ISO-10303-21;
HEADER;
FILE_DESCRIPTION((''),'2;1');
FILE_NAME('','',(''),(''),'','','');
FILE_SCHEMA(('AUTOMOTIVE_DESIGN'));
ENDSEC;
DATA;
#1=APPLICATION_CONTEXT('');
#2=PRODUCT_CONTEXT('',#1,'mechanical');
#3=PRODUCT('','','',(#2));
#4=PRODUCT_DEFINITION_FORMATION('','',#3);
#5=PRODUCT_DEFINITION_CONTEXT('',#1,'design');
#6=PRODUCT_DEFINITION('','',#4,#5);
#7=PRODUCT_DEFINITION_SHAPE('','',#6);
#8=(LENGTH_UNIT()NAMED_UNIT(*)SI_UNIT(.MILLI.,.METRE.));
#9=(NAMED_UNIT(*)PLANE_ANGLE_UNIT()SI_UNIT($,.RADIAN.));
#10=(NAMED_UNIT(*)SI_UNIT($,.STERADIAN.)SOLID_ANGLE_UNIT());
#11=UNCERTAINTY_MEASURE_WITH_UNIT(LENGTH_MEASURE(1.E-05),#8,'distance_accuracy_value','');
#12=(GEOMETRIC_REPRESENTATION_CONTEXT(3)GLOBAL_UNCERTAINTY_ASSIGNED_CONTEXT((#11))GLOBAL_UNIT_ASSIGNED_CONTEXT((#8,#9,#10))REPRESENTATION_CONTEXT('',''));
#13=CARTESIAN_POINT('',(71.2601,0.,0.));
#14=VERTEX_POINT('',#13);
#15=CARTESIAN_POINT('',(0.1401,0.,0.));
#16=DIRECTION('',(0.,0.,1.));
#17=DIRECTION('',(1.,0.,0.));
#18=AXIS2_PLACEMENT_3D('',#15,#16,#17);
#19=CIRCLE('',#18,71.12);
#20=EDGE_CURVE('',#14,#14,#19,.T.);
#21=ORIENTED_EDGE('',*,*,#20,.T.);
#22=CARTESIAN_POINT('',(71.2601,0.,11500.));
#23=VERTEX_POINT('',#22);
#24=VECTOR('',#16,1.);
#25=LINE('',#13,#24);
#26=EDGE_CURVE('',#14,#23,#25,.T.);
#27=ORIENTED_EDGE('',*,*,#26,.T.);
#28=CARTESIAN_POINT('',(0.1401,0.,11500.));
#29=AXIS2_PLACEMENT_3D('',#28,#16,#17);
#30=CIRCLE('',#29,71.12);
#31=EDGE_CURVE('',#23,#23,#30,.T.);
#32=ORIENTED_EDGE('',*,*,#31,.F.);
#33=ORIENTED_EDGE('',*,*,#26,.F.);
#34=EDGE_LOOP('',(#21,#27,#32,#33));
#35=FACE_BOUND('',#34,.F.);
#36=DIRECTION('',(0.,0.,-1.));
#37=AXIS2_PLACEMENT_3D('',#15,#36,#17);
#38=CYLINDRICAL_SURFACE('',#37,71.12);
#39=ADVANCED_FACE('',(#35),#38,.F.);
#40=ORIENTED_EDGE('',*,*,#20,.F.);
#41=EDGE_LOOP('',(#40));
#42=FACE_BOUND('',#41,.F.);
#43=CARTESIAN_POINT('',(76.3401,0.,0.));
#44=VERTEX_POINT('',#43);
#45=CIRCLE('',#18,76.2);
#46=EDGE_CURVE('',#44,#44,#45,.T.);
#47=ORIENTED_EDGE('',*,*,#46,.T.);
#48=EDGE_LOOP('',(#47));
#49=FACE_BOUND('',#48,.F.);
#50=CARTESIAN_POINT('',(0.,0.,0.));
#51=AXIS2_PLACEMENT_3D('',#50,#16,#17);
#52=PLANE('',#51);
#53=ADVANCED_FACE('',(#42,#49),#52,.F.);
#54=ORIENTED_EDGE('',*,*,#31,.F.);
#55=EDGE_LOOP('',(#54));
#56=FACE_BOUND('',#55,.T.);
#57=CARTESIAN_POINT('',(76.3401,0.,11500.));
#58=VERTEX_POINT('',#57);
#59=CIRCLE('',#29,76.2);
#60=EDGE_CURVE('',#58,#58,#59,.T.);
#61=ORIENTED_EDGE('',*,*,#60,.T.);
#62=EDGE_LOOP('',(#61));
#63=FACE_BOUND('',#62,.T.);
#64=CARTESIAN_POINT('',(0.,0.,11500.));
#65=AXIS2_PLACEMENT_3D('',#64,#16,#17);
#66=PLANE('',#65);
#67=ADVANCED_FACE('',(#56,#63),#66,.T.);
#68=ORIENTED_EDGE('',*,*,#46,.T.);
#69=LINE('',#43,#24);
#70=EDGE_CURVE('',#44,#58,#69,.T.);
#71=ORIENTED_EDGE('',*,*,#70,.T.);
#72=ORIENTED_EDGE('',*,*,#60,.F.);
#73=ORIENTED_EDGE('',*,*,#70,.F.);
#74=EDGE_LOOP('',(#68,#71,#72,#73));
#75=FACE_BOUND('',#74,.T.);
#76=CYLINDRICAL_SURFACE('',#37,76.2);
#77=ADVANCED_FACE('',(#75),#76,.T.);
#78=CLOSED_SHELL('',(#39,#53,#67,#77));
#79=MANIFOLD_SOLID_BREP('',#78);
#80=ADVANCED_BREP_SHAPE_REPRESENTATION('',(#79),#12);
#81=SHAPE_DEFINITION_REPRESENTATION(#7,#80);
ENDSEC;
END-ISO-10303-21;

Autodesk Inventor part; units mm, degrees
ref_plane "YZ Plane" through (0, 0, 0) normal (1, 0, 0) x (0, 1, 0)
ref_plane "XZ Plane" through (0, 0, 0) normal (0, 1, 0) x (-1, 0, 0)
ref_plane "XY Plane" through (0, 0, 0) normal (0, 0, 1) x (1, 0, 0)
sketch "Sketch1" plane through (0, 0, 0) normal (0, 0, 1) x (1, 0, 0)
  circle A0 centre (0.1401, 0) radius 76.2
  circle A1 centre (0.1401, 0) radius 71.12
  point P0 (0, 0)
  dimension "d1" = 5.08
  dimension "d2" = 152.4
extrude "Extrusion1" add sketch "Sketch1" along normal blind 11500
properties part number "pipe_6in_0.5m"
